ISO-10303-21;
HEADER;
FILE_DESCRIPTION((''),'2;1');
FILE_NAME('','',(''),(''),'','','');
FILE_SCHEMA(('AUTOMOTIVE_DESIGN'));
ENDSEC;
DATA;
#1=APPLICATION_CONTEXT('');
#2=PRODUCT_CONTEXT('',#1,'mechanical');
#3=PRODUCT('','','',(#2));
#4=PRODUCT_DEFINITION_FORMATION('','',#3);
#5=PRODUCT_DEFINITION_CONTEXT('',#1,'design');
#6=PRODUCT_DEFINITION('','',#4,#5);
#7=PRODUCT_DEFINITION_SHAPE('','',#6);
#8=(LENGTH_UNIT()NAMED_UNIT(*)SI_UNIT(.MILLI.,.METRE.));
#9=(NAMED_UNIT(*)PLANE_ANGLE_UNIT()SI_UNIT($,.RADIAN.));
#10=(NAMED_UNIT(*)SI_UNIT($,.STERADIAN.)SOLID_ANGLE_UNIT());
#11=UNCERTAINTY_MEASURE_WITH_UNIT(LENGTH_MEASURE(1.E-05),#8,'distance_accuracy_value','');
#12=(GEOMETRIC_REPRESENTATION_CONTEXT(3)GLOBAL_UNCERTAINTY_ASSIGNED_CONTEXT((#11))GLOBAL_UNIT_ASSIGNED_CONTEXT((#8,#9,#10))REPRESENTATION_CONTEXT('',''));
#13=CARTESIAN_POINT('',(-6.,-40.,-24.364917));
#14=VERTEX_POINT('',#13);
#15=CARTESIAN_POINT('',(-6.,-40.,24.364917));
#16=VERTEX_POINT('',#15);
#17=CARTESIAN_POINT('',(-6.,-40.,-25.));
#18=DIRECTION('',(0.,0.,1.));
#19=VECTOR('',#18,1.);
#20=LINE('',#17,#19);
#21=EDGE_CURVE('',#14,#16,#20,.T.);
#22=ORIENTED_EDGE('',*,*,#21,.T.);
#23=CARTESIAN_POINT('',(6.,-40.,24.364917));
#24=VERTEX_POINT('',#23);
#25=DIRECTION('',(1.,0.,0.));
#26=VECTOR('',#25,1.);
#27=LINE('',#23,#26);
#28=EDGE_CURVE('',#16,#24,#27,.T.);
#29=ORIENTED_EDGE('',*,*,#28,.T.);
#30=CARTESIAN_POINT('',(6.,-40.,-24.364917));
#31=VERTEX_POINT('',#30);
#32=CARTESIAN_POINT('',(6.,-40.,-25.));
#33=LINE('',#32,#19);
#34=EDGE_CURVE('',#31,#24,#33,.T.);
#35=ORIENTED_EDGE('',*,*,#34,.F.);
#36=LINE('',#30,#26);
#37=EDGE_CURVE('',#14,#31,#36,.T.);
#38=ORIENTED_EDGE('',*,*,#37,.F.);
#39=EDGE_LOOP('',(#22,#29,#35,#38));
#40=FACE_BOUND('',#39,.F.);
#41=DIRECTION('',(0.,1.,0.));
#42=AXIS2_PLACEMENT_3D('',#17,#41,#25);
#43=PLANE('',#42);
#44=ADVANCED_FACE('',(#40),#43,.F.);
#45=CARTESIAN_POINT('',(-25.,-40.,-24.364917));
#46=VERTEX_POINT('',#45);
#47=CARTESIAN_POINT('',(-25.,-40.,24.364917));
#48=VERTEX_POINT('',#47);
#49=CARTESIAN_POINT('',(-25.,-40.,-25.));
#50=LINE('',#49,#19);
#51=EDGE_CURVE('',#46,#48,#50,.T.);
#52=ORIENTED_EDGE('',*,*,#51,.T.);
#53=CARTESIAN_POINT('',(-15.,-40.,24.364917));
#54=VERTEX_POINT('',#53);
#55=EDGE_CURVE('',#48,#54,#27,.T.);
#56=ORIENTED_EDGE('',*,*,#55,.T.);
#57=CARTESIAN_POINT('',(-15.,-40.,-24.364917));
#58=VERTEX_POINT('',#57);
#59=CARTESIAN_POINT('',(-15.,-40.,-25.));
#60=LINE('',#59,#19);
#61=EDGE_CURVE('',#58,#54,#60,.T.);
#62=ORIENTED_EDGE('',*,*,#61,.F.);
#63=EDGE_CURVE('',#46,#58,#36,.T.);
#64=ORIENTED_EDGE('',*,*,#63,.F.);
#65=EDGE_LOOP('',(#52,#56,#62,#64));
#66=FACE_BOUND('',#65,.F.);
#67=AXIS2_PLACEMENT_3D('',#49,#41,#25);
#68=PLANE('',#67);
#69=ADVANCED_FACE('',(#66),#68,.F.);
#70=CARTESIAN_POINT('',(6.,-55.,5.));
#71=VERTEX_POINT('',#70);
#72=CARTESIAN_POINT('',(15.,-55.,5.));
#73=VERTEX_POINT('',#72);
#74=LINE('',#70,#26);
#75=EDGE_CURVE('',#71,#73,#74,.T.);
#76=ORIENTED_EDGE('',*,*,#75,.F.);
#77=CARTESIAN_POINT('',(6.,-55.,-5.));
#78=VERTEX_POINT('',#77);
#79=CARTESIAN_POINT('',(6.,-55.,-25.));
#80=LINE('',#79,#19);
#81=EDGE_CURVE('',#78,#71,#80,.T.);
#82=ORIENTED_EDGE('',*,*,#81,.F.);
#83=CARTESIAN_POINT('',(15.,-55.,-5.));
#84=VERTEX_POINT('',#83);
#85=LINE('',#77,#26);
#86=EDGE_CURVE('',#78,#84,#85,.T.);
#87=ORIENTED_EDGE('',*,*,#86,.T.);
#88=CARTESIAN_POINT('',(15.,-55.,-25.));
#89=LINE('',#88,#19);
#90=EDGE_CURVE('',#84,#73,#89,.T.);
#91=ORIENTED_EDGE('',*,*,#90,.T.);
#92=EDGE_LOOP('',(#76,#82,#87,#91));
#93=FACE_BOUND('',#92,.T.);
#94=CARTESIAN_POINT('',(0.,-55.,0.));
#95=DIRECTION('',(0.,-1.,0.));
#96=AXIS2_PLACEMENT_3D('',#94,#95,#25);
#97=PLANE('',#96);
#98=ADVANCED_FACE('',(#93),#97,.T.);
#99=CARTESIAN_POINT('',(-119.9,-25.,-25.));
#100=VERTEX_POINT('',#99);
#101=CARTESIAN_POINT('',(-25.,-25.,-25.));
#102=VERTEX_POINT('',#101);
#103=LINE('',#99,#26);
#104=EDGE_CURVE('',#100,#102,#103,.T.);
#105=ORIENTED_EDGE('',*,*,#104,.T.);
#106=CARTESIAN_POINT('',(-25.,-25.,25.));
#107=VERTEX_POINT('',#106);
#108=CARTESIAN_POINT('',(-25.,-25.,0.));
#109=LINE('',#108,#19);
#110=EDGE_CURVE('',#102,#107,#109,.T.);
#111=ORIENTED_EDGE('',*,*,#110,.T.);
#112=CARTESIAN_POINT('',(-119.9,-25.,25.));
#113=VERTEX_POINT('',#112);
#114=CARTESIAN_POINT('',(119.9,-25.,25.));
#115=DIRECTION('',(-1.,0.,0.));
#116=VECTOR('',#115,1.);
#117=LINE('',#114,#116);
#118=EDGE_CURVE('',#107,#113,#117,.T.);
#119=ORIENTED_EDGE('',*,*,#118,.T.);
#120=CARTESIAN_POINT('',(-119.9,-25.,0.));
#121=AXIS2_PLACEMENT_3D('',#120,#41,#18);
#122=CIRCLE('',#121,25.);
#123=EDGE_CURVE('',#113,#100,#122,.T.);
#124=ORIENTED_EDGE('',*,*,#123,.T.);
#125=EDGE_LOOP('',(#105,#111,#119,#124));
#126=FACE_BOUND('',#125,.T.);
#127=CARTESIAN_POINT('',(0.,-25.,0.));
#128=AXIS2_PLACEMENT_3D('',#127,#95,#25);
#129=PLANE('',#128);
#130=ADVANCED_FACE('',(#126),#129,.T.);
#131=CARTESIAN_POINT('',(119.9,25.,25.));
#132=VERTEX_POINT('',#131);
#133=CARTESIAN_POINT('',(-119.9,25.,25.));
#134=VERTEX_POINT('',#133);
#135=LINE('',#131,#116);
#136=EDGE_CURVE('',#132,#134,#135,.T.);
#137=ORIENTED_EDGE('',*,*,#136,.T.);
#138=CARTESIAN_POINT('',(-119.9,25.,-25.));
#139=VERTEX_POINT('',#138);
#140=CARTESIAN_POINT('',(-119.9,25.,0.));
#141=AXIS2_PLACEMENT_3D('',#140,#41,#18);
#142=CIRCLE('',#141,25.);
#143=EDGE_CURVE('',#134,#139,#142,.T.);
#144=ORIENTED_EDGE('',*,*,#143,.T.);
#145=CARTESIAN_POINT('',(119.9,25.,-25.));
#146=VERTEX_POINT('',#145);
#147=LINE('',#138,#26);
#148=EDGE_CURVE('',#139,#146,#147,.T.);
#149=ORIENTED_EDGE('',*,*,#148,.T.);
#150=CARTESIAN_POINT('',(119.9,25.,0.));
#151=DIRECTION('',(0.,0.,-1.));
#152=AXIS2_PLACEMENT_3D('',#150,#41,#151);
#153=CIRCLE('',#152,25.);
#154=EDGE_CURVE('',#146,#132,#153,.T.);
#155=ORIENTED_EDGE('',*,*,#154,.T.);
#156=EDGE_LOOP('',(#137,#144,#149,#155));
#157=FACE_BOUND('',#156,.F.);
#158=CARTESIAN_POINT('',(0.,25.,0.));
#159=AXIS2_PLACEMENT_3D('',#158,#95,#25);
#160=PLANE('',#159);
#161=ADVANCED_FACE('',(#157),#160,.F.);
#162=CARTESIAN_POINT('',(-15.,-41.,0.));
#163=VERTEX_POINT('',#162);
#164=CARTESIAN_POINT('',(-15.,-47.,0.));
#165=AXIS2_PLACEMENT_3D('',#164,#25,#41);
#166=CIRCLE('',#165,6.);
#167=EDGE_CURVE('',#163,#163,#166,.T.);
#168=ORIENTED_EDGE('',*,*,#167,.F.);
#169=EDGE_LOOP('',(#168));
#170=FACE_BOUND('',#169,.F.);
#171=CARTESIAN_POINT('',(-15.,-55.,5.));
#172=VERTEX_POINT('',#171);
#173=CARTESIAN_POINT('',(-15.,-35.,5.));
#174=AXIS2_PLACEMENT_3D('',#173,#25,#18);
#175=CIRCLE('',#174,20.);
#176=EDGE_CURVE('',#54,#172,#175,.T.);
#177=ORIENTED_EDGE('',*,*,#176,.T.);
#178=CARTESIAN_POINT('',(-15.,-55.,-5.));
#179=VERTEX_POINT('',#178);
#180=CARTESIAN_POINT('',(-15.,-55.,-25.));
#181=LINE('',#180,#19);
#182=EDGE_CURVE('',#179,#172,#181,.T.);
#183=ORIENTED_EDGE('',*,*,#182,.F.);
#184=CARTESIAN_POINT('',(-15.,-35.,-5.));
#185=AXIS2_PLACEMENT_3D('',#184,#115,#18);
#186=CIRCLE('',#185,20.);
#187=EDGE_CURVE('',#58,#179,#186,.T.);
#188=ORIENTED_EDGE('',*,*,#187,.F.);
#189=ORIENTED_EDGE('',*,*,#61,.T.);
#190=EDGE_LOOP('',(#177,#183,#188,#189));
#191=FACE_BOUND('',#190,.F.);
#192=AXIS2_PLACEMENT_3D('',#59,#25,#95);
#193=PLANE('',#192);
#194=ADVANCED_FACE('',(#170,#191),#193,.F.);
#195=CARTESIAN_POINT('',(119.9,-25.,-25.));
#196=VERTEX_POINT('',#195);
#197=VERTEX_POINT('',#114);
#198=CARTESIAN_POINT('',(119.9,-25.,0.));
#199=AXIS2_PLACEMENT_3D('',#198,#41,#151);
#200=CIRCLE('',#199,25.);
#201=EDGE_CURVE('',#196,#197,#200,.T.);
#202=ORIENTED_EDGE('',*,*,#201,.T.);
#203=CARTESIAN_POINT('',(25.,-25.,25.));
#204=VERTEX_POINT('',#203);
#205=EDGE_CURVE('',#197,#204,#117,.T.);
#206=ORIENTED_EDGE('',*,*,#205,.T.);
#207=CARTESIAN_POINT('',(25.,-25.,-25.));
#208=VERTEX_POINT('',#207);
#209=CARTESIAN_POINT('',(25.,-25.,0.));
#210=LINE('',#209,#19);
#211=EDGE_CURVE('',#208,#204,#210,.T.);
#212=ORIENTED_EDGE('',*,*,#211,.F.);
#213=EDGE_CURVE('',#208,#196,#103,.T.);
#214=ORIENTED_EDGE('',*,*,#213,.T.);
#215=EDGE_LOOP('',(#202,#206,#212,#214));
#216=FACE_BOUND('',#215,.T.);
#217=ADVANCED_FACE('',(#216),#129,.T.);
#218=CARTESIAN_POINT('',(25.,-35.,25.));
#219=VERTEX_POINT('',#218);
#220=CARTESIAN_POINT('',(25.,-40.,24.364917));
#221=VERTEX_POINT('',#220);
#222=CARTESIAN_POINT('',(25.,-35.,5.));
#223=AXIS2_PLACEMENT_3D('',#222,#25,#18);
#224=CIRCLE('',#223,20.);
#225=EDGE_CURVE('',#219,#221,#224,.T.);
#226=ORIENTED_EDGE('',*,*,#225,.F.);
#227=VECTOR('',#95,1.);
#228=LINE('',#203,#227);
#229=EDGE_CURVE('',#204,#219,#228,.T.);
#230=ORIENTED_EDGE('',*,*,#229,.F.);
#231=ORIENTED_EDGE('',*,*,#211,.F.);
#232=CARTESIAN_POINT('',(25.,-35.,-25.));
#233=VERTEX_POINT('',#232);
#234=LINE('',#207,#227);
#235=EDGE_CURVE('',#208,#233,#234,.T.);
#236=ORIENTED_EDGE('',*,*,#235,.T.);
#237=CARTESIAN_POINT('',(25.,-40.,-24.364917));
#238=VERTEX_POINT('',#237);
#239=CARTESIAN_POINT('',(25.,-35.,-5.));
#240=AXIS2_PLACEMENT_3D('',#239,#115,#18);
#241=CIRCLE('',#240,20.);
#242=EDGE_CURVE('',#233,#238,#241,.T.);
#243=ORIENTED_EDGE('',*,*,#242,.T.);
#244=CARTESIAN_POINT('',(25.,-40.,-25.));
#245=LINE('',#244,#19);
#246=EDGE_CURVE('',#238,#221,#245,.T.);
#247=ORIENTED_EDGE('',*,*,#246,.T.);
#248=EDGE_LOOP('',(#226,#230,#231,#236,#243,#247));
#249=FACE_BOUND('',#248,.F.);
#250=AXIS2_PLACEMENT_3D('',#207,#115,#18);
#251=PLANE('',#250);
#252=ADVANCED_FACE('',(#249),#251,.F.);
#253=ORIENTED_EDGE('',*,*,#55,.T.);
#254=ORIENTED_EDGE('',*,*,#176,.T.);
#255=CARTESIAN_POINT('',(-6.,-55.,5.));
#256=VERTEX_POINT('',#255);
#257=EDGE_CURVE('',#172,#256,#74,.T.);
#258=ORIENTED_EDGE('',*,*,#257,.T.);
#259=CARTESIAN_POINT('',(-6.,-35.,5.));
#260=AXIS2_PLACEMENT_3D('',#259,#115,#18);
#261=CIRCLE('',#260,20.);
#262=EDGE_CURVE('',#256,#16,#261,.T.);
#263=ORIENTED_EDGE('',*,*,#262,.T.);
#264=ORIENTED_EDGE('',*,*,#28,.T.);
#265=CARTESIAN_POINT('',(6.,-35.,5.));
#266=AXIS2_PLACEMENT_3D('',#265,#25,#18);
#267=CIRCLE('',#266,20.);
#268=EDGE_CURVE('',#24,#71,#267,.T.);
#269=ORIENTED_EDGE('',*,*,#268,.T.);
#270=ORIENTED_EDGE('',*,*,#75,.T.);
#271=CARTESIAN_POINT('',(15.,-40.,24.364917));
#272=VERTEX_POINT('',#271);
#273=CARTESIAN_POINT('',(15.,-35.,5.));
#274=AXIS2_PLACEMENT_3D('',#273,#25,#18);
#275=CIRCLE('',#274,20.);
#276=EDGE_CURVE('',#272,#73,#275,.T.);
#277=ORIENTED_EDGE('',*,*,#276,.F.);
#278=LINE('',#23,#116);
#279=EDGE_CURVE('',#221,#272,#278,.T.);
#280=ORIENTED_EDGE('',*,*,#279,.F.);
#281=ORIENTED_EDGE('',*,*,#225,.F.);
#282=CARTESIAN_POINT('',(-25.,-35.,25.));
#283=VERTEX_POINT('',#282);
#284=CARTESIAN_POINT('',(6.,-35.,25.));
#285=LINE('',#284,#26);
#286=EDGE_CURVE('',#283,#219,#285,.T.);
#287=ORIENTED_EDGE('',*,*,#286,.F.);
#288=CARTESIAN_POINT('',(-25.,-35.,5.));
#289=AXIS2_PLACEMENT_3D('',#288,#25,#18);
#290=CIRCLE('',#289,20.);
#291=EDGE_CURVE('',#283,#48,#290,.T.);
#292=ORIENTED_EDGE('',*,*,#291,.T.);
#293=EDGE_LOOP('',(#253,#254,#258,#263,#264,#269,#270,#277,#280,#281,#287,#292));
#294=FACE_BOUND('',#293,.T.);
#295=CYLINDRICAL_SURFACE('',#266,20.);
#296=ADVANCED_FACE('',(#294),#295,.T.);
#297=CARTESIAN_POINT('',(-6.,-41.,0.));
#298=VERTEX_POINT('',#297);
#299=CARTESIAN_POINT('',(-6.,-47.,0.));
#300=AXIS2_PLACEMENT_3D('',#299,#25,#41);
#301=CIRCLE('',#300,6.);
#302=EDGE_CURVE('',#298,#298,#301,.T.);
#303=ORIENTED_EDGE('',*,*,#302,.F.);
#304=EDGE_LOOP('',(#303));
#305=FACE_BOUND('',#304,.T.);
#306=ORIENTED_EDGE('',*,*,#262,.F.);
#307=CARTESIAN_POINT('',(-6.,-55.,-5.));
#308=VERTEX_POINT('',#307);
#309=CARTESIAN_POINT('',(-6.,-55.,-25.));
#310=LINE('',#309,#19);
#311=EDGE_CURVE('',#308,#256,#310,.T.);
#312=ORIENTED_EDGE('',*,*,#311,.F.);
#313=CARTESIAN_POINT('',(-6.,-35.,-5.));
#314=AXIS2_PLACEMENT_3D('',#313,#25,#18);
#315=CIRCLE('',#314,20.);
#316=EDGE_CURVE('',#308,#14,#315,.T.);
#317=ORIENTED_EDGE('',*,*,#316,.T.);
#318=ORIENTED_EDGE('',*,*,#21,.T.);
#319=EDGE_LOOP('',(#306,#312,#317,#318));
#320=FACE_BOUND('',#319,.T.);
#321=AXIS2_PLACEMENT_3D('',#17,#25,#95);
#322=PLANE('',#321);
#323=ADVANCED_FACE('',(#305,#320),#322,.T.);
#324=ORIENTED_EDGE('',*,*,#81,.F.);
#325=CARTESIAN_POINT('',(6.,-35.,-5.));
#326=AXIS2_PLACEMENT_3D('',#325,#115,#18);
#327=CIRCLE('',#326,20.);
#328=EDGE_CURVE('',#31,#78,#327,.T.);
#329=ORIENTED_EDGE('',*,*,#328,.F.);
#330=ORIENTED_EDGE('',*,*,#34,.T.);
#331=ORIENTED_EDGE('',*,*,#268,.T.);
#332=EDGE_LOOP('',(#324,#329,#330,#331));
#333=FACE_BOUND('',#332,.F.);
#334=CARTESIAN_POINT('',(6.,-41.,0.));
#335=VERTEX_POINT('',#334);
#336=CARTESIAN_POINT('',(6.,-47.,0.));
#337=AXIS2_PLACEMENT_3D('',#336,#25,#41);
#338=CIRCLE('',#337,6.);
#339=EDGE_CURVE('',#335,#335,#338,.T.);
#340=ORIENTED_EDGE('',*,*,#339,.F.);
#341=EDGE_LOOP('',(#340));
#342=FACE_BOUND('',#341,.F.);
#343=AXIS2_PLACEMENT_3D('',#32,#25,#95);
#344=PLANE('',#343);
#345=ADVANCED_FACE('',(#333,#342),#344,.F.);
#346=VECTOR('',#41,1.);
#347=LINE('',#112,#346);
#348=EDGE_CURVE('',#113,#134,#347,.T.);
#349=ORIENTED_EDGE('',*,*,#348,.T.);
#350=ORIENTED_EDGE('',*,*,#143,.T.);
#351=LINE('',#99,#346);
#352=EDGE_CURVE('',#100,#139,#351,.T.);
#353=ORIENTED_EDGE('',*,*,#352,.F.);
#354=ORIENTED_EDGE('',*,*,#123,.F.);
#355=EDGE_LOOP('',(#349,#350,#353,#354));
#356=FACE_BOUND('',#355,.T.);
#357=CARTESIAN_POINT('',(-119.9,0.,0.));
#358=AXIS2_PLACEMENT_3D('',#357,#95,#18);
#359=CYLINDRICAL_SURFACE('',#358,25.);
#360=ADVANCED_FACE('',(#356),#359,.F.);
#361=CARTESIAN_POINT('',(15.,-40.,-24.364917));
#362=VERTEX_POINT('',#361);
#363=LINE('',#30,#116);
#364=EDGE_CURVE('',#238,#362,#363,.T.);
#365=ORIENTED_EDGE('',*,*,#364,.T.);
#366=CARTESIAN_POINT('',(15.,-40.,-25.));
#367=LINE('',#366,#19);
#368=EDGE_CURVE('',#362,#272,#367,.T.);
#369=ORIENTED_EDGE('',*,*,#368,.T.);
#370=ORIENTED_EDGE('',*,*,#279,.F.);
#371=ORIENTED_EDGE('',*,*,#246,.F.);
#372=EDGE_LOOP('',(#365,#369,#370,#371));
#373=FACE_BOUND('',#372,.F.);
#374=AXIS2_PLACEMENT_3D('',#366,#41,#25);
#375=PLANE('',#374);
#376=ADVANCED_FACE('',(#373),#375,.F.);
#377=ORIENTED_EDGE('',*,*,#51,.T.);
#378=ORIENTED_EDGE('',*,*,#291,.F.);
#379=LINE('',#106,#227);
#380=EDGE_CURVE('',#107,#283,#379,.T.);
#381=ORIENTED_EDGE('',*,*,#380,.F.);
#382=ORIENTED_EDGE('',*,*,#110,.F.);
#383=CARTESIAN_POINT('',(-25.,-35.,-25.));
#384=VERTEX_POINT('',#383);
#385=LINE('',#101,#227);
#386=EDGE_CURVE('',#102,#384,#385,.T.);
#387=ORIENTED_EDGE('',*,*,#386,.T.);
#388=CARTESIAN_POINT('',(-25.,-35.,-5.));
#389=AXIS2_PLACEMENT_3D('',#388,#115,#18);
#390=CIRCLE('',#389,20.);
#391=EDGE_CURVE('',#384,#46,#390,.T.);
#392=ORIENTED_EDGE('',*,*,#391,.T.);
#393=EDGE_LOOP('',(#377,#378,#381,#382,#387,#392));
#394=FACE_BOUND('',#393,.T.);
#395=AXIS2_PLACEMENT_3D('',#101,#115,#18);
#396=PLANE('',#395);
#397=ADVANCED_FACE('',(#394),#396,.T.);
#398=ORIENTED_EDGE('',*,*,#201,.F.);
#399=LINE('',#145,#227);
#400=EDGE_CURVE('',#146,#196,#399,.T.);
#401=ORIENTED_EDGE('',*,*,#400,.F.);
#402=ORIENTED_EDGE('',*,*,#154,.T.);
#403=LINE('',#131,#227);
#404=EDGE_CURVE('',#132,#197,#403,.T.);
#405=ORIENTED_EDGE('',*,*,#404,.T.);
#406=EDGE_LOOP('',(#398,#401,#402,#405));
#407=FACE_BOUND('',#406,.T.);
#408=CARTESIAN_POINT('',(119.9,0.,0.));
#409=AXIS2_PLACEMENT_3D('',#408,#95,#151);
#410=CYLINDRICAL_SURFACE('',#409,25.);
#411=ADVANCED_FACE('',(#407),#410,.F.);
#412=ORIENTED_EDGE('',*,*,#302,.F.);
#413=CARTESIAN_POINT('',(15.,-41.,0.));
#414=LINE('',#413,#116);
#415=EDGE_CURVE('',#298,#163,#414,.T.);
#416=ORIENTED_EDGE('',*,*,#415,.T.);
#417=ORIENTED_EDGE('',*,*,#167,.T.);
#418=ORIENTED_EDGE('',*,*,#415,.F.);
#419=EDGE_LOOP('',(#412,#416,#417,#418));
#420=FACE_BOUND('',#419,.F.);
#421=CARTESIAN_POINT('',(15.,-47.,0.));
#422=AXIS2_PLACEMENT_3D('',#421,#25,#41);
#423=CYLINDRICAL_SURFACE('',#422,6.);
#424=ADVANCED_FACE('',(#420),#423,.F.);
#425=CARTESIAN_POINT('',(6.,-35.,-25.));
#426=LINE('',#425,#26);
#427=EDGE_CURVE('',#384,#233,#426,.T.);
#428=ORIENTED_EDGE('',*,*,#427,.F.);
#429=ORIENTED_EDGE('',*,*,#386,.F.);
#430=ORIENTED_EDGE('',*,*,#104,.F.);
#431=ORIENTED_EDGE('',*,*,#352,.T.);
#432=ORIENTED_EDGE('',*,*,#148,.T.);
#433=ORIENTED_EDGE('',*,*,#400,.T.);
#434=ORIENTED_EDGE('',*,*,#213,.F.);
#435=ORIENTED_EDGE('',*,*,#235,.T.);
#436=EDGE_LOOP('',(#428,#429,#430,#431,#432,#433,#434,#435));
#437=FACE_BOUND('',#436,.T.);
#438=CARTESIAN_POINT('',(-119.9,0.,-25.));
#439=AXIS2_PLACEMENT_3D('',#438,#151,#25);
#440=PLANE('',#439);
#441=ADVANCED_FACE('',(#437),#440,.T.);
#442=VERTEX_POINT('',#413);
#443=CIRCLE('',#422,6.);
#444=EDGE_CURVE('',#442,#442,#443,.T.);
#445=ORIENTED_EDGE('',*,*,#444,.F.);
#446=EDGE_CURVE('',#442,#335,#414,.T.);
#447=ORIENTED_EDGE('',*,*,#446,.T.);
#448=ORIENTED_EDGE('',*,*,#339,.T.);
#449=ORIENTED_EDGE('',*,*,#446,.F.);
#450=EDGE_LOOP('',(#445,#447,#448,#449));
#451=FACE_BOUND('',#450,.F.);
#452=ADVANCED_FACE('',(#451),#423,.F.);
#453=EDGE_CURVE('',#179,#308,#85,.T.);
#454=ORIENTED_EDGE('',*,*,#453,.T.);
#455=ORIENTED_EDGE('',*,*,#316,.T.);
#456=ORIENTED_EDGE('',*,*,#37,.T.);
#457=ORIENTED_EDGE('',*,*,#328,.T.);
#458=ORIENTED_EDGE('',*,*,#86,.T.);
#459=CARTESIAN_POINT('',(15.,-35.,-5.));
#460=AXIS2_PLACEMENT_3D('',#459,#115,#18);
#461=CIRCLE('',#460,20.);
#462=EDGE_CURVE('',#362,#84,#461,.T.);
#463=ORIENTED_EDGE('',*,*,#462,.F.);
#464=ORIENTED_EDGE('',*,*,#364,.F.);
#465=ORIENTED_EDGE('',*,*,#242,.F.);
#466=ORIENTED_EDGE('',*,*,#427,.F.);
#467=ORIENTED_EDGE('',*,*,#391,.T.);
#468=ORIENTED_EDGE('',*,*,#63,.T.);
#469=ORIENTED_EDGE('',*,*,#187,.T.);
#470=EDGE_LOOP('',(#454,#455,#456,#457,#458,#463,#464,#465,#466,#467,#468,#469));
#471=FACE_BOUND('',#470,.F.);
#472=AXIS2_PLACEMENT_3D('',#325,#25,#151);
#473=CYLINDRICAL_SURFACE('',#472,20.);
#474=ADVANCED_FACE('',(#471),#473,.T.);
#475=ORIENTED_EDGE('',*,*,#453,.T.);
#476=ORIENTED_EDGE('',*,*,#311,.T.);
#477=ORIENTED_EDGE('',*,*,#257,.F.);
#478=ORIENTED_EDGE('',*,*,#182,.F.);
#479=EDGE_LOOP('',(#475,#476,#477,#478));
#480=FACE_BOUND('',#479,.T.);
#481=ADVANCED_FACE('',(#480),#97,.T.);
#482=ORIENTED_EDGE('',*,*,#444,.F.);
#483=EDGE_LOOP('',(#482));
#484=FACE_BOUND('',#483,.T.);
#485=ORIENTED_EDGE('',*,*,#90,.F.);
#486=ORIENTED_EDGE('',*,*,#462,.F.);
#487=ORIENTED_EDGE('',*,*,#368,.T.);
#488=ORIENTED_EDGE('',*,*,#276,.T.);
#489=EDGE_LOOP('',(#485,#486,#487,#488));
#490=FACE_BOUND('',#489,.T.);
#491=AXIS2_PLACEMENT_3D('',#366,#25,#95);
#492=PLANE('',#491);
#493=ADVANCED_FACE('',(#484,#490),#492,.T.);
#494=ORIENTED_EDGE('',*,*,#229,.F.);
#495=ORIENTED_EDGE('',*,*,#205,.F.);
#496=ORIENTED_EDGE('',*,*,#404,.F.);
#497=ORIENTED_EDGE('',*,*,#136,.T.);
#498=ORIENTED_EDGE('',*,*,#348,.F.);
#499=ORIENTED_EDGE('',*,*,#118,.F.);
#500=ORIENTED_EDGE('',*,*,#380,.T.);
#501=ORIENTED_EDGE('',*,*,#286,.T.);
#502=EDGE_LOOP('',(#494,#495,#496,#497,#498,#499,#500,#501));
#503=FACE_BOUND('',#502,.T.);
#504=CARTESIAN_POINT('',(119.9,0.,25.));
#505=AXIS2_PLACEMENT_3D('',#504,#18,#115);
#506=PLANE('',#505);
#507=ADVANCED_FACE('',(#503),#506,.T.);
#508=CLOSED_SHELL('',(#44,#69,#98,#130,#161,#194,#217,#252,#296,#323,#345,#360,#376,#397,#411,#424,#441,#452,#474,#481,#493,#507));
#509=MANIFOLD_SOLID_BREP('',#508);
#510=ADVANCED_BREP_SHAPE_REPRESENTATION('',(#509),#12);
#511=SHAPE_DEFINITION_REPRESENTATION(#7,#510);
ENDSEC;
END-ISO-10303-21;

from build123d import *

# Parameters (mm, degrees)
F1_DEPTH  = 25
F2_W      = 50
F2_H      = 50
F3_DEPTH  = 30
F6_W      = 6
F6_H      = 15
F5_W      = 6
F5_H      = 15
F4_W      = 10
F4_H      = 15
F7_DEPTH  = 50.001
F8_F1_R   = 20
F8_F2_R   = 20
F9_R      = 6
F10_DEPTH = 134.901


with BuildPart() as f1:
    # F0 (on Front) → F1 (new body, symmetric)
    with BuildSketch(Plane.XZ):
        with BuildLine():
            Line((-119.9, -25), (119.9, -25))
            ThreePointArc((119.9, -25), (94.9, 0), (119.9, 25))
            Line((119.9, 25), (-119.9, 25))
            ThreePointArc((-119.9, 25), (-94.9, 0), (-119.9, -25))
        make_face()
    extrude(amount=F1_DEPTH, both=True)

    # F2 (on face) → F3 (join)
    with BuildSketch(Plane.XZ.offset(25)):
        Rectangle(F2_W, F2_H)
    extrude(amount=F3_DEPTH)

    # F6 (on face) + F5 (on face) + F4 (on face) → F7 (cut, through all)
    with BuildSketch(Plane(origin=(0, 0, -25), x_dir=(1, 0, 0), z_dir=(0, 0, -1))):
        with Locations((-3, 47.5)):
            Rectangle(F6_W, F6_H)
    with BuildSketch(Plane(origin=(0, 0, -25), x_dir=(1, 0, 0), z_dir=(0, 0, -1))):
        with Locations((3, 47.5)):
            Rectangle(F5_W, F5_H)
    with BuildSketch(Plane(origin=(0, 0, -25), x_dir=(1, 0, 0), z_dir=(0, 0, -1))):
        with Locations((20, 47.5)):
            Rectangle(F4_W, F4_H)
        with Locations((-20, 47.5)):
            Rectangle(F4_W, F4_H)
    extrude(amount=-F7_DEPTH, mode=Mode.SUBTRACT)

    # F8: fillet of radius 20 on 4 edges, made by hand

    # F8_f1
    f8_f1_edges = [f1.edges().sort_by_distance(p)[0] for p in [
        (10.5, -55, 25),
    ]]
    fillet(f8_f1_edges, radius=F8_F1_R)

    # F8_f2
    f8_f2_edges = [f1.edges().sort_by_distance(p)[0] for p in [
        (10.5, -55, -25),
    ]]
    fillet(f8_f2_edges, radius=F8_F2_R)

    # F9 (on face) → F10 (cut, through all)
    with BuildSketch(Plane.YZ.offset(15)):
        with Locations((-47, 0)):
            Circle(F9_R)
    extrude(amount=-F10_DEPTH, mode=Mode.SUBTRACT)


solid = f1.part
